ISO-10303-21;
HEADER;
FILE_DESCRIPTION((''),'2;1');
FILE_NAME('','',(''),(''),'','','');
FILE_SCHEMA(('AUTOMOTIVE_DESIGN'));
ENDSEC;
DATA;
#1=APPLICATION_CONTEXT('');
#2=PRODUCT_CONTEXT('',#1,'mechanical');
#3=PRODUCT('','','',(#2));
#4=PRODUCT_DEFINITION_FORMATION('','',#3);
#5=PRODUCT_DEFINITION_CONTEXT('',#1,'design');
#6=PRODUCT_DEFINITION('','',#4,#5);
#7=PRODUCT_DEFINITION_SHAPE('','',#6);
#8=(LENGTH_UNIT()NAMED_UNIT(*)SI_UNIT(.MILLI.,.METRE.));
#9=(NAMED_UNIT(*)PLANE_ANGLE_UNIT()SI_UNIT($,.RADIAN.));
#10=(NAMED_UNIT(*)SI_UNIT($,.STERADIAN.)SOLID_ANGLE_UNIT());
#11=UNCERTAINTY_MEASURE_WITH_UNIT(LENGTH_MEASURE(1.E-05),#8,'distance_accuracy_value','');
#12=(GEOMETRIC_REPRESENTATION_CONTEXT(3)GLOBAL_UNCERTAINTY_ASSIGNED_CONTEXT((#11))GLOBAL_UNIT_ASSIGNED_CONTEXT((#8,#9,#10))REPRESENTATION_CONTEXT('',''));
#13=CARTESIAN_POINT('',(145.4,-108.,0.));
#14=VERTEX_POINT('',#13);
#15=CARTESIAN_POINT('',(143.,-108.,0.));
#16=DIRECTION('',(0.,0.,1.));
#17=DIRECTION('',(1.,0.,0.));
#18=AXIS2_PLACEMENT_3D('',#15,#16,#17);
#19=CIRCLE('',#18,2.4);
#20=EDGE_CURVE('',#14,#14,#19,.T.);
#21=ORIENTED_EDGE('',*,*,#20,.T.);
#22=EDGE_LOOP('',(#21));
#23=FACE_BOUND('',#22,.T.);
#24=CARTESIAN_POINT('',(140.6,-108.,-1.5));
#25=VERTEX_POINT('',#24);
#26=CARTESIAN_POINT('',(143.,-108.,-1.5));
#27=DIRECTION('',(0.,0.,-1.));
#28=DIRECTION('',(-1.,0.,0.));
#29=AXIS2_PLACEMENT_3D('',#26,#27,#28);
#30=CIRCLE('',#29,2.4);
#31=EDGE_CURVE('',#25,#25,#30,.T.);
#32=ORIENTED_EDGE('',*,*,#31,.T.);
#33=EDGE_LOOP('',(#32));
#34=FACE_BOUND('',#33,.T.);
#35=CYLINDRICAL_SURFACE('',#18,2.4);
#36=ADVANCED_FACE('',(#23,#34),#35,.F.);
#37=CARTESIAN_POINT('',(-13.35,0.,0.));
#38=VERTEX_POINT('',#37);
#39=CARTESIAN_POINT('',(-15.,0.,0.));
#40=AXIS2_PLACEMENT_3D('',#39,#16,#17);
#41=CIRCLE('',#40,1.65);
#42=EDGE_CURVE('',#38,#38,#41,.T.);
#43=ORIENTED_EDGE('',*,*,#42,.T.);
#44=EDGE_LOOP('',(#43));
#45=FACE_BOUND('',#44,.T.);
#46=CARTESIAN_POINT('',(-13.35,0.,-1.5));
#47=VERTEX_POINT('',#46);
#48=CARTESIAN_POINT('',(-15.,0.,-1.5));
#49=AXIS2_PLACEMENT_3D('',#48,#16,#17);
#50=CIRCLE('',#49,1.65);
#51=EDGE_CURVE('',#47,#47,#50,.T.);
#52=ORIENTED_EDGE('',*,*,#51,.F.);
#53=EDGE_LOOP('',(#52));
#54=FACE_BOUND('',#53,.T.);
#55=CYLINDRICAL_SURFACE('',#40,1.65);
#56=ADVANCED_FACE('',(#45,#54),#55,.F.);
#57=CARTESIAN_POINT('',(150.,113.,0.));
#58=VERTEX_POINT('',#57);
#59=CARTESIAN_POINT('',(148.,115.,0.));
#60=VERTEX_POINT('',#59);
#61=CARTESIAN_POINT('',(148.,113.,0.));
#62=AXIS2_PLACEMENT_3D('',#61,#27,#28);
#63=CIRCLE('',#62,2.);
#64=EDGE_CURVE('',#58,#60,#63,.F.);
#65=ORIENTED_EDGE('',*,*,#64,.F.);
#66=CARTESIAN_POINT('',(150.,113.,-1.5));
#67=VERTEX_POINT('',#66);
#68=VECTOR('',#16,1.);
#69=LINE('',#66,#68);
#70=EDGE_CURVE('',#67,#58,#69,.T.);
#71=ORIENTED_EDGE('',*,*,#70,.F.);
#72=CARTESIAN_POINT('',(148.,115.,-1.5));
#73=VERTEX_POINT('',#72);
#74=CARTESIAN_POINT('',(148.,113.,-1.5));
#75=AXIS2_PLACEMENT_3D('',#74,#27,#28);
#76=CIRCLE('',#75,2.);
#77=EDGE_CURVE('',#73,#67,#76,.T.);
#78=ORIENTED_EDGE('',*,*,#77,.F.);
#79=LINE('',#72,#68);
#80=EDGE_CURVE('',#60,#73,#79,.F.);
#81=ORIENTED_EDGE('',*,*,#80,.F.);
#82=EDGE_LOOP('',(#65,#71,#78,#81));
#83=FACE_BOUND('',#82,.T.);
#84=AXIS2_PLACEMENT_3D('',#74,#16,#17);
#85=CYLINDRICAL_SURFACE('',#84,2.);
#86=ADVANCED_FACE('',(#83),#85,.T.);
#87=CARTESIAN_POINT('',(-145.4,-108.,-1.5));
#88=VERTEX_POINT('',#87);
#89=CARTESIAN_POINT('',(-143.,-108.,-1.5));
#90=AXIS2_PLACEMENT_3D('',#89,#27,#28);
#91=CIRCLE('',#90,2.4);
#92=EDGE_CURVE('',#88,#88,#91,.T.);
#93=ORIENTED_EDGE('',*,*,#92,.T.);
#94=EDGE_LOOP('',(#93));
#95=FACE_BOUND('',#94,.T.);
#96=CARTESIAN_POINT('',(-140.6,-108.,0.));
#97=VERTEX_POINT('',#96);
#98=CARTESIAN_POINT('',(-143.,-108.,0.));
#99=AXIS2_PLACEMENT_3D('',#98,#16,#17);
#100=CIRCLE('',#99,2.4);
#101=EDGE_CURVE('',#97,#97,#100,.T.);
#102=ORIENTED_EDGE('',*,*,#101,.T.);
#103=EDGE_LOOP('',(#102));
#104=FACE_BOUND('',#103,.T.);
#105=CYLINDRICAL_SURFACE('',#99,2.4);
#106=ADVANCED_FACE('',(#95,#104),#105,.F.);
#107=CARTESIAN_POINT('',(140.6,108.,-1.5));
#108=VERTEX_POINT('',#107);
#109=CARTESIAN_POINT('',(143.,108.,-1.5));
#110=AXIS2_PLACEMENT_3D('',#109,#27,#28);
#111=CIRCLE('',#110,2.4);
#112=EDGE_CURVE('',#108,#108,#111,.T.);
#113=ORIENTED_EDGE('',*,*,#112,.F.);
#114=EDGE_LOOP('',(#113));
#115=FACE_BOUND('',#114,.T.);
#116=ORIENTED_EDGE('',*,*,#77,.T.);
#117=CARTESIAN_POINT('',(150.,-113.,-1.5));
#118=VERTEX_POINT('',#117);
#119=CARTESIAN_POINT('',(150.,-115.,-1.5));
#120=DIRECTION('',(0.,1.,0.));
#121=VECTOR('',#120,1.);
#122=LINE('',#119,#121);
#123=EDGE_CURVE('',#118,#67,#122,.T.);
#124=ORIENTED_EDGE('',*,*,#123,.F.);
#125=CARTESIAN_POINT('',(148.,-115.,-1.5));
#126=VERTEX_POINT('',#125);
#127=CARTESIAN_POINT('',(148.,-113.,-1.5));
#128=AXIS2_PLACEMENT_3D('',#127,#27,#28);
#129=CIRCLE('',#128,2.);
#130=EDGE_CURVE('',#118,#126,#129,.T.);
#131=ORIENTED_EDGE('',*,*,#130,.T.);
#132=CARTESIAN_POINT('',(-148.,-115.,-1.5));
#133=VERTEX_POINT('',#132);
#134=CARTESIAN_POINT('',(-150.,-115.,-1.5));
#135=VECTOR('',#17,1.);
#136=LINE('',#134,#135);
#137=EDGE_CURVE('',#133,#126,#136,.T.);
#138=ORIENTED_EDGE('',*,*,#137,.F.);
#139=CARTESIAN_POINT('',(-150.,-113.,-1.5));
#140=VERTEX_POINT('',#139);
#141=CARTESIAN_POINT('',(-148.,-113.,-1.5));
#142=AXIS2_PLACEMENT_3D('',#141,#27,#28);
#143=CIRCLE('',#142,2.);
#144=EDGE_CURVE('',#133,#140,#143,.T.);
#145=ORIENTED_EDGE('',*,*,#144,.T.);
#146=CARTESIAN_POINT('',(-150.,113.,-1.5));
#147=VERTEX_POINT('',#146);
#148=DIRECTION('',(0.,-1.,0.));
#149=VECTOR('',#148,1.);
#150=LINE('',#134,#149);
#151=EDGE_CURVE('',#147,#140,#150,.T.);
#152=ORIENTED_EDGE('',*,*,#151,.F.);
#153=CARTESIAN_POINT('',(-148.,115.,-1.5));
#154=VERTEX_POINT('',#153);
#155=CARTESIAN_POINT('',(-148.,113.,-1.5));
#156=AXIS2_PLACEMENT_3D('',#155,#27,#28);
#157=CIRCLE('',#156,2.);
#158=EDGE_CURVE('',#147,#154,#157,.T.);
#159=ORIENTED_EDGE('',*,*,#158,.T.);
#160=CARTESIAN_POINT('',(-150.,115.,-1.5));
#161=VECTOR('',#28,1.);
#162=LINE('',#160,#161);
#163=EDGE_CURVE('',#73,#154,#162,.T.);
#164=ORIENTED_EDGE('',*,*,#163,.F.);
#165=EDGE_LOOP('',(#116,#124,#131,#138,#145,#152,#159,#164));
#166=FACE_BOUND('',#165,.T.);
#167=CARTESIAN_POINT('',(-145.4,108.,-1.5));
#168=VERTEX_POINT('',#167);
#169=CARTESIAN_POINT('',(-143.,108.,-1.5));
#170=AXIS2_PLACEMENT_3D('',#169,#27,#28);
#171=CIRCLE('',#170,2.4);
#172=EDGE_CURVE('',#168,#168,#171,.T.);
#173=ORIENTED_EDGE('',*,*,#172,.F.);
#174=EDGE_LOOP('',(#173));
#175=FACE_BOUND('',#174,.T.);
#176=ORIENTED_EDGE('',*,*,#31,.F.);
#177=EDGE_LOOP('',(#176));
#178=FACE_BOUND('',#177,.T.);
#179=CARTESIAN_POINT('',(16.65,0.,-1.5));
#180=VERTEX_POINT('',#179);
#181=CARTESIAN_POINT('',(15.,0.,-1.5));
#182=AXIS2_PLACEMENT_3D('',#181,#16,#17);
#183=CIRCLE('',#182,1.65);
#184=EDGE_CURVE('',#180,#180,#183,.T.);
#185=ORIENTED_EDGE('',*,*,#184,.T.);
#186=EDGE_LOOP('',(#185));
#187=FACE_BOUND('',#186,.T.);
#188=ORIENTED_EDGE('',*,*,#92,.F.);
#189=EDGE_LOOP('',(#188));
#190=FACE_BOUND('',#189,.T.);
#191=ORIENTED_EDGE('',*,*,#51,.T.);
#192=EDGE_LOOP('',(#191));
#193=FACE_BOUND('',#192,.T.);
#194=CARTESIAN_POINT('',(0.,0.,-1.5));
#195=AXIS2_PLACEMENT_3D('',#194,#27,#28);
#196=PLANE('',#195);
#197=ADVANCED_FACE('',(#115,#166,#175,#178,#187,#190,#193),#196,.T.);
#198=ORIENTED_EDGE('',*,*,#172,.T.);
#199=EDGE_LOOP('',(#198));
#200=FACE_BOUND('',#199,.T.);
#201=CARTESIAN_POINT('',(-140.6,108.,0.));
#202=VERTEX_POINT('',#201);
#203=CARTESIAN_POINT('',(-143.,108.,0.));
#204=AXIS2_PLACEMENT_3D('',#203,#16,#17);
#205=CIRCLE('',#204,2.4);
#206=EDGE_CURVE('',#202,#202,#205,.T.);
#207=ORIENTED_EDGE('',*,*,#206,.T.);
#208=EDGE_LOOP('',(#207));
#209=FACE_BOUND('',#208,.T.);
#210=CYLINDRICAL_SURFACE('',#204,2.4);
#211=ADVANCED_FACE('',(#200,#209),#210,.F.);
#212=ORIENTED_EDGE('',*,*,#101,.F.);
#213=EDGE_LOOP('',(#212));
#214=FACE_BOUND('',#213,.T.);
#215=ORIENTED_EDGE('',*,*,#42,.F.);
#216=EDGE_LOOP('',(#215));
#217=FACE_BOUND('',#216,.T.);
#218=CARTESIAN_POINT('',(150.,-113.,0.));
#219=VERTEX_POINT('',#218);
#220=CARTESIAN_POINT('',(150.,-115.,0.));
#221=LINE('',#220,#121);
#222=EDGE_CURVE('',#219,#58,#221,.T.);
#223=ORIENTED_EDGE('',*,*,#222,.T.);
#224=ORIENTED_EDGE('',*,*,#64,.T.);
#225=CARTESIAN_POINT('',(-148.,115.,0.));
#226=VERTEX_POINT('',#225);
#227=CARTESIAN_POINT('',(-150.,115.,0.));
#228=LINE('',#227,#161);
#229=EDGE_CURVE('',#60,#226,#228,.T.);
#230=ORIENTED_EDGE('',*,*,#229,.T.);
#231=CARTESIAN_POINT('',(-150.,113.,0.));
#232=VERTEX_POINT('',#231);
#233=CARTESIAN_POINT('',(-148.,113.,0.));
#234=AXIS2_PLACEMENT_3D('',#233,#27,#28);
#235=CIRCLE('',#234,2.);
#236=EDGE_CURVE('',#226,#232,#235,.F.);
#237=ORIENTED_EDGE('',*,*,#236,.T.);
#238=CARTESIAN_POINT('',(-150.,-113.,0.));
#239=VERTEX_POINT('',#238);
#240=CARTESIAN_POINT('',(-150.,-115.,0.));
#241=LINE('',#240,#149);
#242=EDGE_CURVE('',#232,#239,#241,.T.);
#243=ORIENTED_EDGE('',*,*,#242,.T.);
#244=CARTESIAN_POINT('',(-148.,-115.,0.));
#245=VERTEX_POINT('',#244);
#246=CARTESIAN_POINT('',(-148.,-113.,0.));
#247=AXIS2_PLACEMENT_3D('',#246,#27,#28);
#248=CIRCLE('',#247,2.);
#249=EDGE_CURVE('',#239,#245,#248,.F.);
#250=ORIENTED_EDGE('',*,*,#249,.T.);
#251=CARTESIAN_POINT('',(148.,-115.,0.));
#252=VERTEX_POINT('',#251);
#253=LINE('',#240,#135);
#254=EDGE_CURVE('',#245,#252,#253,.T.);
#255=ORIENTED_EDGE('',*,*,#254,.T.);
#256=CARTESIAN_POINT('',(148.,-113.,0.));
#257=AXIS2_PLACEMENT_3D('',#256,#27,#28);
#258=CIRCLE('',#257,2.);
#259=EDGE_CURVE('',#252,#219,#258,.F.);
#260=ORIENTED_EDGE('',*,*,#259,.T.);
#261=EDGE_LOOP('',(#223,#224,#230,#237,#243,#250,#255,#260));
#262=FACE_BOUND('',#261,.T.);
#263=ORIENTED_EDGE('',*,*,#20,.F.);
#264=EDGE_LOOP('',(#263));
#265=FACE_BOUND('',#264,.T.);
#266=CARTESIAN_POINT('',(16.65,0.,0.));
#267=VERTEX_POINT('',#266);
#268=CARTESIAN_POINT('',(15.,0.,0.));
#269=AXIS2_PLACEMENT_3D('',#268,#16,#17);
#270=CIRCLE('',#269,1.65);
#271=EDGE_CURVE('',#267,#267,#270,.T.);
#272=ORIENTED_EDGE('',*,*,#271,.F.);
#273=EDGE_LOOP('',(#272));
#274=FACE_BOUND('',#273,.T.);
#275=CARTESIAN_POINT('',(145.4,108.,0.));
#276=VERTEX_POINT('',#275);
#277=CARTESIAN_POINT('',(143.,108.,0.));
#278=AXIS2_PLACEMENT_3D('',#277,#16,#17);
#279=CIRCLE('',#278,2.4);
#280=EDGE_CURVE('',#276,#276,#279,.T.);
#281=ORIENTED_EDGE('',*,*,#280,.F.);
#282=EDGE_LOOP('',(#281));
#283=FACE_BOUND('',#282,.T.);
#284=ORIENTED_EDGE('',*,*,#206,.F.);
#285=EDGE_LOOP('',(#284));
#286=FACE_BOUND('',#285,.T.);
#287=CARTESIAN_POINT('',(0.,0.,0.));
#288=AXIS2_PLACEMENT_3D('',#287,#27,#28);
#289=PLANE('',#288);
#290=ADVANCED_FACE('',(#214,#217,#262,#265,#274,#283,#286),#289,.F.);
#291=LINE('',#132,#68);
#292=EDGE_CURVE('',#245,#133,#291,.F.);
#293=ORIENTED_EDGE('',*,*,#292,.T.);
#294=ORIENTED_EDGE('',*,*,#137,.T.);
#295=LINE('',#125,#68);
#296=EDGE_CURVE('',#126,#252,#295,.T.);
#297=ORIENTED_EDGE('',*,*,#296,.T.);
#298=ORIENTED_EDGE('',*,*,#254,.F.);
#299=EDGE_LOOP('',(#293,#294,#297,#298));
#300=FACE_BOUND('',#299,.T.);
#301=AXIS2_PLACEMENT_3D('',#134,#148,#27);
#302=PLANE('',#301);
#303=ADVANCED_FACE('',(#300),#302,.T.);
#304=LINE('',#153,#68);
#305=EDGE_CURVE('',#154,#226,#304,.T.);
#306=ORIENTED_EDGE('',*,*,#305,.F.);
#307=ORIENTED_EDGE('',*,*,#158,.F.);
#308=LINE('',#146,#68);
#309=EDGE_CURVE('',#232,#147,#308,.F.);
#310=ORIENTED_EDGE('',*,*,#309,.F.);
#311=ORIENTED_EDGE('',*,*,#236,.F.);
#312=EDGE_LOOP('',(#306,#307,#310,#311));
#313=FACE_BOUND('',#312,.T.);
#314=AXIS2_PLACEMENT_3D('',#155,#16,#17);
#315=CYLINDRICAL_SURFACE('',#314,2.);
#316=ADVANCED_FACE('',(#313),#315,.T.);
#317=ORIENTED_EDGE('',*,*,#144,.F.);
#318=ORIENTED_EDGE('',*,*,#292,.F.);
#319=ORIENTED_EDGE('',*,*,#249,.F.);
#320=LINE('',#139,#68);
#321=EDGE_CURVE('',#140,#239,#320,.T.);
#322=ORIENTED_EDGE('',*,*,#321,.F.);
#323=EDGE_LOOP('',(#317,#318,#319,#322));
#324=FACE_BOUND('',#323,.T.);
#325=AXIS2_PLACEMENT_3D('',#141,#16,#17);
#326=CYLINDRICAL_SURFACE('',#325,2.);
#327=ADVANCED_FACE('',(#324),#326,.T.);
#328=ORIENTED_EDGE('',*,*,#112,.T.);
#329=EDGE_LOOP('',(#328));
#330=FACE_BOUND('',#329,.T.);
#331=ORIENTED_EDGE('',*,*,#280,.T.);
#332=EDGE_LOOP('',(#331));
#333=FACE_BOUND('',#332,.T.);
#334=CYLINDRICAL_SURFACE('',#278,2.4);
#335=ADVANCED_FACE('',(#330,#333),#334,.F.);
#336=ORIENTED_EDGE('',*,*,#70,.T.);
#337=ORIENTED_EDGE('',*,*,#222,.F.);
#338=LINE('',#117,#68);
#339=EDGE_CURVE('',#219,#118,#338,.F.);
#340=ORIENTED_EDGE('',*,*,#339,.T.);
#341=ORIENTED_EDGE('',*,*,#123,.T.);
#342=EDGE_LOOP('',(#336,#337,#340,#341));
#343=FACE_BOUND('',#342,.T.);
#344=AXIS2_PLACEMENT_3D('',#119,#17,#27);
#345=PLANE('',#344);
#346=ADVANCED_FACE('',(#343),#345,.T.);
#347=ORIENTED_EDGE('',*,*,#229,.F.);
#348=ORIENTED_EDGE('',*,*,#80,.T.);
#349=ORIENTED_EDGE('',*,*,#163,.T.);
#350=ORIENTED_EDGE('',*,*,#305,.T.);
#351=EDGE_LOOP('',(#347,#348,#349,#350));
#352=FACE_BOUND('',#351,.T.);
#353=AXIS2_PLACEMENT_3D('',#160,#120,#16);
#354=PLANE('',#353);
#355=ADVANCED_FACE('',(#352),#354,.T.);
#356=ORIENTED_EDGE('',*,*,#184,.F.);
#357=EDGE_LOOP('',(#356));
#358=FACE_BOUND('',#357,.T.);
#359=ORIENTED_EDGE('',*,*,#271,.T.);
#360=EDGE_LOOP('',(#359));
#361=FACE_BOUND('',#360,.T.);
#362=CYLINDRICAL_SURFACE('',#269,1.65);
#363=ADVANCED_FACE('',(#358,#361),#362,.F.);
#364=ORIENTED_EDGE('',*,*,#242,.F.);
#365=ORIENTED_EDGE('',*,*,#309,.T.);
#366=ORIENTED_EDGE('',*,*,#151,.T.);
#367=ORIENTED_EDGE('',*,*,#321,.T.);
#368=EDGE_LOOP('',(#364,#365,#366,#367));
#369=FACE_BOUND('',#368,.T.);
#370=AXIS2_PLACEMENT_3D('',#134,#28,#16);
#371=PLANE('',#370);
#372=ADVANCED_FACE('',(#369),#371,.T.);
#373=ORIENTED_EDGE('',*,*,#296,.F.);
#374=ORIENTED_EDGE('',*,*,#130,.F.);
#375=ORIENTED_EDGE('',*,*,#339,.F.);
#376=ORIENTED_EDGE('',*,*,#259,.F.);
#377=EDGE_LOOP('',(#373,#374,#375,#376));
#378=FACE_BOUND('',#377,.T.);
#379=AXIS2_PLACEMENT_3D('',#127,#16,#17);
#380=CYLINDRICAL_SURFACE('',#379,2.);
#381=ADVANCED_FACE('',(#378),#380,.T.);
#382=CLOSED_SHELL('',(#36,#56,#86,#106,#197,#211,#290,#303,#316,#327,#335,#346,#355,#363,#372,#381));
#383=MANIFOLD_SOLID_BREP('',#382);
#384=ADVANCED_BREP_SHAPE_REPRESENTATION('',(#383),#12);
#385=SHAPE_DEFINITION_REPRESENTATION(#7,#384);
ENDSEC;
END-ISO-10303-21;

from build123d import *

# Parameters (mm, degrees)
SKETCH_1_W             = 300
SKETCH_1_H             = 230
SM_BASE_FLANGE_1_DEPTH = 1.5
HOLE_WIZARD_M4_1_D     = 4.8
HOLE_WIZARD_M4_1_2_D   = 3.3
OTHER_START            = -2
OTHER_1_DEPTH          = 3


with BuildPart() as part:
    # 基体-法兰1: sheet metal written as solids
    # Sketch 1 → 基体-法兰1 (new body)
    with BuildSketch(Plane.XY):
        Rectangle(SKETCH_1_W, SKETCH_1_H)
    extrude(amount=-SM_BASE_FLANGE_1_DEPTH)

    # Hole Wizard M4 _1 (through all)
    with Locations(Plane.XY):
        with Locations((-143, 108), (143, 108), (143, -108), (-143, -108)):
            Hole(HOLE_WIZARD_M4_1_D / 2)

    # Hole Wizard M4 _1 2 (through all)
    with Locations(Plane.XY):
        with Locations((-15, 0), (15, 0)):
            Hole(HOLE_WIZARD_M4_1_2_D / 2)

    # Other 1: read off the stored shape, not the designer's step
    # Other 1 outline → Other 1 (cut)
    with BuildSketch(Plane.XY.offset(OTHER_START)):
        with BuildLine():
            ThreePointArc((150, -113), (149.414213562, -114.414213562), (148, -115))
            Line((148, -115), (150, -115))
            Line((150, -115), (150, -113))
        make_face()
        with BuildLine():
            Line((-150, -115), (-148, -115))
            ThreePointArc((-148, -115), (-149.414213562, -114.414213562), (-150, -113))
            Line((-150, -113), (-150, -115))
        make_face()
        with BuildLine():
            ThreePointArc((148, 115), (149.414213562, 114.414213562), (150, 113))
            Line((150, 113), (150, 115))
            Line((150, 115), (148, 115))
        make_face()
        with BuildLine():
            Line((-150, 115), (-150, 113))
            ThreePointArc((-150, 113), (-149.414213562, 114.414213562), (-148, 115))
            Line((-148, 115), (-150, 115))
        make_face()
    extrude(amount=OTHER_1_DEPTH, mode=Mode.SUBTRACT)


solid = part.part
